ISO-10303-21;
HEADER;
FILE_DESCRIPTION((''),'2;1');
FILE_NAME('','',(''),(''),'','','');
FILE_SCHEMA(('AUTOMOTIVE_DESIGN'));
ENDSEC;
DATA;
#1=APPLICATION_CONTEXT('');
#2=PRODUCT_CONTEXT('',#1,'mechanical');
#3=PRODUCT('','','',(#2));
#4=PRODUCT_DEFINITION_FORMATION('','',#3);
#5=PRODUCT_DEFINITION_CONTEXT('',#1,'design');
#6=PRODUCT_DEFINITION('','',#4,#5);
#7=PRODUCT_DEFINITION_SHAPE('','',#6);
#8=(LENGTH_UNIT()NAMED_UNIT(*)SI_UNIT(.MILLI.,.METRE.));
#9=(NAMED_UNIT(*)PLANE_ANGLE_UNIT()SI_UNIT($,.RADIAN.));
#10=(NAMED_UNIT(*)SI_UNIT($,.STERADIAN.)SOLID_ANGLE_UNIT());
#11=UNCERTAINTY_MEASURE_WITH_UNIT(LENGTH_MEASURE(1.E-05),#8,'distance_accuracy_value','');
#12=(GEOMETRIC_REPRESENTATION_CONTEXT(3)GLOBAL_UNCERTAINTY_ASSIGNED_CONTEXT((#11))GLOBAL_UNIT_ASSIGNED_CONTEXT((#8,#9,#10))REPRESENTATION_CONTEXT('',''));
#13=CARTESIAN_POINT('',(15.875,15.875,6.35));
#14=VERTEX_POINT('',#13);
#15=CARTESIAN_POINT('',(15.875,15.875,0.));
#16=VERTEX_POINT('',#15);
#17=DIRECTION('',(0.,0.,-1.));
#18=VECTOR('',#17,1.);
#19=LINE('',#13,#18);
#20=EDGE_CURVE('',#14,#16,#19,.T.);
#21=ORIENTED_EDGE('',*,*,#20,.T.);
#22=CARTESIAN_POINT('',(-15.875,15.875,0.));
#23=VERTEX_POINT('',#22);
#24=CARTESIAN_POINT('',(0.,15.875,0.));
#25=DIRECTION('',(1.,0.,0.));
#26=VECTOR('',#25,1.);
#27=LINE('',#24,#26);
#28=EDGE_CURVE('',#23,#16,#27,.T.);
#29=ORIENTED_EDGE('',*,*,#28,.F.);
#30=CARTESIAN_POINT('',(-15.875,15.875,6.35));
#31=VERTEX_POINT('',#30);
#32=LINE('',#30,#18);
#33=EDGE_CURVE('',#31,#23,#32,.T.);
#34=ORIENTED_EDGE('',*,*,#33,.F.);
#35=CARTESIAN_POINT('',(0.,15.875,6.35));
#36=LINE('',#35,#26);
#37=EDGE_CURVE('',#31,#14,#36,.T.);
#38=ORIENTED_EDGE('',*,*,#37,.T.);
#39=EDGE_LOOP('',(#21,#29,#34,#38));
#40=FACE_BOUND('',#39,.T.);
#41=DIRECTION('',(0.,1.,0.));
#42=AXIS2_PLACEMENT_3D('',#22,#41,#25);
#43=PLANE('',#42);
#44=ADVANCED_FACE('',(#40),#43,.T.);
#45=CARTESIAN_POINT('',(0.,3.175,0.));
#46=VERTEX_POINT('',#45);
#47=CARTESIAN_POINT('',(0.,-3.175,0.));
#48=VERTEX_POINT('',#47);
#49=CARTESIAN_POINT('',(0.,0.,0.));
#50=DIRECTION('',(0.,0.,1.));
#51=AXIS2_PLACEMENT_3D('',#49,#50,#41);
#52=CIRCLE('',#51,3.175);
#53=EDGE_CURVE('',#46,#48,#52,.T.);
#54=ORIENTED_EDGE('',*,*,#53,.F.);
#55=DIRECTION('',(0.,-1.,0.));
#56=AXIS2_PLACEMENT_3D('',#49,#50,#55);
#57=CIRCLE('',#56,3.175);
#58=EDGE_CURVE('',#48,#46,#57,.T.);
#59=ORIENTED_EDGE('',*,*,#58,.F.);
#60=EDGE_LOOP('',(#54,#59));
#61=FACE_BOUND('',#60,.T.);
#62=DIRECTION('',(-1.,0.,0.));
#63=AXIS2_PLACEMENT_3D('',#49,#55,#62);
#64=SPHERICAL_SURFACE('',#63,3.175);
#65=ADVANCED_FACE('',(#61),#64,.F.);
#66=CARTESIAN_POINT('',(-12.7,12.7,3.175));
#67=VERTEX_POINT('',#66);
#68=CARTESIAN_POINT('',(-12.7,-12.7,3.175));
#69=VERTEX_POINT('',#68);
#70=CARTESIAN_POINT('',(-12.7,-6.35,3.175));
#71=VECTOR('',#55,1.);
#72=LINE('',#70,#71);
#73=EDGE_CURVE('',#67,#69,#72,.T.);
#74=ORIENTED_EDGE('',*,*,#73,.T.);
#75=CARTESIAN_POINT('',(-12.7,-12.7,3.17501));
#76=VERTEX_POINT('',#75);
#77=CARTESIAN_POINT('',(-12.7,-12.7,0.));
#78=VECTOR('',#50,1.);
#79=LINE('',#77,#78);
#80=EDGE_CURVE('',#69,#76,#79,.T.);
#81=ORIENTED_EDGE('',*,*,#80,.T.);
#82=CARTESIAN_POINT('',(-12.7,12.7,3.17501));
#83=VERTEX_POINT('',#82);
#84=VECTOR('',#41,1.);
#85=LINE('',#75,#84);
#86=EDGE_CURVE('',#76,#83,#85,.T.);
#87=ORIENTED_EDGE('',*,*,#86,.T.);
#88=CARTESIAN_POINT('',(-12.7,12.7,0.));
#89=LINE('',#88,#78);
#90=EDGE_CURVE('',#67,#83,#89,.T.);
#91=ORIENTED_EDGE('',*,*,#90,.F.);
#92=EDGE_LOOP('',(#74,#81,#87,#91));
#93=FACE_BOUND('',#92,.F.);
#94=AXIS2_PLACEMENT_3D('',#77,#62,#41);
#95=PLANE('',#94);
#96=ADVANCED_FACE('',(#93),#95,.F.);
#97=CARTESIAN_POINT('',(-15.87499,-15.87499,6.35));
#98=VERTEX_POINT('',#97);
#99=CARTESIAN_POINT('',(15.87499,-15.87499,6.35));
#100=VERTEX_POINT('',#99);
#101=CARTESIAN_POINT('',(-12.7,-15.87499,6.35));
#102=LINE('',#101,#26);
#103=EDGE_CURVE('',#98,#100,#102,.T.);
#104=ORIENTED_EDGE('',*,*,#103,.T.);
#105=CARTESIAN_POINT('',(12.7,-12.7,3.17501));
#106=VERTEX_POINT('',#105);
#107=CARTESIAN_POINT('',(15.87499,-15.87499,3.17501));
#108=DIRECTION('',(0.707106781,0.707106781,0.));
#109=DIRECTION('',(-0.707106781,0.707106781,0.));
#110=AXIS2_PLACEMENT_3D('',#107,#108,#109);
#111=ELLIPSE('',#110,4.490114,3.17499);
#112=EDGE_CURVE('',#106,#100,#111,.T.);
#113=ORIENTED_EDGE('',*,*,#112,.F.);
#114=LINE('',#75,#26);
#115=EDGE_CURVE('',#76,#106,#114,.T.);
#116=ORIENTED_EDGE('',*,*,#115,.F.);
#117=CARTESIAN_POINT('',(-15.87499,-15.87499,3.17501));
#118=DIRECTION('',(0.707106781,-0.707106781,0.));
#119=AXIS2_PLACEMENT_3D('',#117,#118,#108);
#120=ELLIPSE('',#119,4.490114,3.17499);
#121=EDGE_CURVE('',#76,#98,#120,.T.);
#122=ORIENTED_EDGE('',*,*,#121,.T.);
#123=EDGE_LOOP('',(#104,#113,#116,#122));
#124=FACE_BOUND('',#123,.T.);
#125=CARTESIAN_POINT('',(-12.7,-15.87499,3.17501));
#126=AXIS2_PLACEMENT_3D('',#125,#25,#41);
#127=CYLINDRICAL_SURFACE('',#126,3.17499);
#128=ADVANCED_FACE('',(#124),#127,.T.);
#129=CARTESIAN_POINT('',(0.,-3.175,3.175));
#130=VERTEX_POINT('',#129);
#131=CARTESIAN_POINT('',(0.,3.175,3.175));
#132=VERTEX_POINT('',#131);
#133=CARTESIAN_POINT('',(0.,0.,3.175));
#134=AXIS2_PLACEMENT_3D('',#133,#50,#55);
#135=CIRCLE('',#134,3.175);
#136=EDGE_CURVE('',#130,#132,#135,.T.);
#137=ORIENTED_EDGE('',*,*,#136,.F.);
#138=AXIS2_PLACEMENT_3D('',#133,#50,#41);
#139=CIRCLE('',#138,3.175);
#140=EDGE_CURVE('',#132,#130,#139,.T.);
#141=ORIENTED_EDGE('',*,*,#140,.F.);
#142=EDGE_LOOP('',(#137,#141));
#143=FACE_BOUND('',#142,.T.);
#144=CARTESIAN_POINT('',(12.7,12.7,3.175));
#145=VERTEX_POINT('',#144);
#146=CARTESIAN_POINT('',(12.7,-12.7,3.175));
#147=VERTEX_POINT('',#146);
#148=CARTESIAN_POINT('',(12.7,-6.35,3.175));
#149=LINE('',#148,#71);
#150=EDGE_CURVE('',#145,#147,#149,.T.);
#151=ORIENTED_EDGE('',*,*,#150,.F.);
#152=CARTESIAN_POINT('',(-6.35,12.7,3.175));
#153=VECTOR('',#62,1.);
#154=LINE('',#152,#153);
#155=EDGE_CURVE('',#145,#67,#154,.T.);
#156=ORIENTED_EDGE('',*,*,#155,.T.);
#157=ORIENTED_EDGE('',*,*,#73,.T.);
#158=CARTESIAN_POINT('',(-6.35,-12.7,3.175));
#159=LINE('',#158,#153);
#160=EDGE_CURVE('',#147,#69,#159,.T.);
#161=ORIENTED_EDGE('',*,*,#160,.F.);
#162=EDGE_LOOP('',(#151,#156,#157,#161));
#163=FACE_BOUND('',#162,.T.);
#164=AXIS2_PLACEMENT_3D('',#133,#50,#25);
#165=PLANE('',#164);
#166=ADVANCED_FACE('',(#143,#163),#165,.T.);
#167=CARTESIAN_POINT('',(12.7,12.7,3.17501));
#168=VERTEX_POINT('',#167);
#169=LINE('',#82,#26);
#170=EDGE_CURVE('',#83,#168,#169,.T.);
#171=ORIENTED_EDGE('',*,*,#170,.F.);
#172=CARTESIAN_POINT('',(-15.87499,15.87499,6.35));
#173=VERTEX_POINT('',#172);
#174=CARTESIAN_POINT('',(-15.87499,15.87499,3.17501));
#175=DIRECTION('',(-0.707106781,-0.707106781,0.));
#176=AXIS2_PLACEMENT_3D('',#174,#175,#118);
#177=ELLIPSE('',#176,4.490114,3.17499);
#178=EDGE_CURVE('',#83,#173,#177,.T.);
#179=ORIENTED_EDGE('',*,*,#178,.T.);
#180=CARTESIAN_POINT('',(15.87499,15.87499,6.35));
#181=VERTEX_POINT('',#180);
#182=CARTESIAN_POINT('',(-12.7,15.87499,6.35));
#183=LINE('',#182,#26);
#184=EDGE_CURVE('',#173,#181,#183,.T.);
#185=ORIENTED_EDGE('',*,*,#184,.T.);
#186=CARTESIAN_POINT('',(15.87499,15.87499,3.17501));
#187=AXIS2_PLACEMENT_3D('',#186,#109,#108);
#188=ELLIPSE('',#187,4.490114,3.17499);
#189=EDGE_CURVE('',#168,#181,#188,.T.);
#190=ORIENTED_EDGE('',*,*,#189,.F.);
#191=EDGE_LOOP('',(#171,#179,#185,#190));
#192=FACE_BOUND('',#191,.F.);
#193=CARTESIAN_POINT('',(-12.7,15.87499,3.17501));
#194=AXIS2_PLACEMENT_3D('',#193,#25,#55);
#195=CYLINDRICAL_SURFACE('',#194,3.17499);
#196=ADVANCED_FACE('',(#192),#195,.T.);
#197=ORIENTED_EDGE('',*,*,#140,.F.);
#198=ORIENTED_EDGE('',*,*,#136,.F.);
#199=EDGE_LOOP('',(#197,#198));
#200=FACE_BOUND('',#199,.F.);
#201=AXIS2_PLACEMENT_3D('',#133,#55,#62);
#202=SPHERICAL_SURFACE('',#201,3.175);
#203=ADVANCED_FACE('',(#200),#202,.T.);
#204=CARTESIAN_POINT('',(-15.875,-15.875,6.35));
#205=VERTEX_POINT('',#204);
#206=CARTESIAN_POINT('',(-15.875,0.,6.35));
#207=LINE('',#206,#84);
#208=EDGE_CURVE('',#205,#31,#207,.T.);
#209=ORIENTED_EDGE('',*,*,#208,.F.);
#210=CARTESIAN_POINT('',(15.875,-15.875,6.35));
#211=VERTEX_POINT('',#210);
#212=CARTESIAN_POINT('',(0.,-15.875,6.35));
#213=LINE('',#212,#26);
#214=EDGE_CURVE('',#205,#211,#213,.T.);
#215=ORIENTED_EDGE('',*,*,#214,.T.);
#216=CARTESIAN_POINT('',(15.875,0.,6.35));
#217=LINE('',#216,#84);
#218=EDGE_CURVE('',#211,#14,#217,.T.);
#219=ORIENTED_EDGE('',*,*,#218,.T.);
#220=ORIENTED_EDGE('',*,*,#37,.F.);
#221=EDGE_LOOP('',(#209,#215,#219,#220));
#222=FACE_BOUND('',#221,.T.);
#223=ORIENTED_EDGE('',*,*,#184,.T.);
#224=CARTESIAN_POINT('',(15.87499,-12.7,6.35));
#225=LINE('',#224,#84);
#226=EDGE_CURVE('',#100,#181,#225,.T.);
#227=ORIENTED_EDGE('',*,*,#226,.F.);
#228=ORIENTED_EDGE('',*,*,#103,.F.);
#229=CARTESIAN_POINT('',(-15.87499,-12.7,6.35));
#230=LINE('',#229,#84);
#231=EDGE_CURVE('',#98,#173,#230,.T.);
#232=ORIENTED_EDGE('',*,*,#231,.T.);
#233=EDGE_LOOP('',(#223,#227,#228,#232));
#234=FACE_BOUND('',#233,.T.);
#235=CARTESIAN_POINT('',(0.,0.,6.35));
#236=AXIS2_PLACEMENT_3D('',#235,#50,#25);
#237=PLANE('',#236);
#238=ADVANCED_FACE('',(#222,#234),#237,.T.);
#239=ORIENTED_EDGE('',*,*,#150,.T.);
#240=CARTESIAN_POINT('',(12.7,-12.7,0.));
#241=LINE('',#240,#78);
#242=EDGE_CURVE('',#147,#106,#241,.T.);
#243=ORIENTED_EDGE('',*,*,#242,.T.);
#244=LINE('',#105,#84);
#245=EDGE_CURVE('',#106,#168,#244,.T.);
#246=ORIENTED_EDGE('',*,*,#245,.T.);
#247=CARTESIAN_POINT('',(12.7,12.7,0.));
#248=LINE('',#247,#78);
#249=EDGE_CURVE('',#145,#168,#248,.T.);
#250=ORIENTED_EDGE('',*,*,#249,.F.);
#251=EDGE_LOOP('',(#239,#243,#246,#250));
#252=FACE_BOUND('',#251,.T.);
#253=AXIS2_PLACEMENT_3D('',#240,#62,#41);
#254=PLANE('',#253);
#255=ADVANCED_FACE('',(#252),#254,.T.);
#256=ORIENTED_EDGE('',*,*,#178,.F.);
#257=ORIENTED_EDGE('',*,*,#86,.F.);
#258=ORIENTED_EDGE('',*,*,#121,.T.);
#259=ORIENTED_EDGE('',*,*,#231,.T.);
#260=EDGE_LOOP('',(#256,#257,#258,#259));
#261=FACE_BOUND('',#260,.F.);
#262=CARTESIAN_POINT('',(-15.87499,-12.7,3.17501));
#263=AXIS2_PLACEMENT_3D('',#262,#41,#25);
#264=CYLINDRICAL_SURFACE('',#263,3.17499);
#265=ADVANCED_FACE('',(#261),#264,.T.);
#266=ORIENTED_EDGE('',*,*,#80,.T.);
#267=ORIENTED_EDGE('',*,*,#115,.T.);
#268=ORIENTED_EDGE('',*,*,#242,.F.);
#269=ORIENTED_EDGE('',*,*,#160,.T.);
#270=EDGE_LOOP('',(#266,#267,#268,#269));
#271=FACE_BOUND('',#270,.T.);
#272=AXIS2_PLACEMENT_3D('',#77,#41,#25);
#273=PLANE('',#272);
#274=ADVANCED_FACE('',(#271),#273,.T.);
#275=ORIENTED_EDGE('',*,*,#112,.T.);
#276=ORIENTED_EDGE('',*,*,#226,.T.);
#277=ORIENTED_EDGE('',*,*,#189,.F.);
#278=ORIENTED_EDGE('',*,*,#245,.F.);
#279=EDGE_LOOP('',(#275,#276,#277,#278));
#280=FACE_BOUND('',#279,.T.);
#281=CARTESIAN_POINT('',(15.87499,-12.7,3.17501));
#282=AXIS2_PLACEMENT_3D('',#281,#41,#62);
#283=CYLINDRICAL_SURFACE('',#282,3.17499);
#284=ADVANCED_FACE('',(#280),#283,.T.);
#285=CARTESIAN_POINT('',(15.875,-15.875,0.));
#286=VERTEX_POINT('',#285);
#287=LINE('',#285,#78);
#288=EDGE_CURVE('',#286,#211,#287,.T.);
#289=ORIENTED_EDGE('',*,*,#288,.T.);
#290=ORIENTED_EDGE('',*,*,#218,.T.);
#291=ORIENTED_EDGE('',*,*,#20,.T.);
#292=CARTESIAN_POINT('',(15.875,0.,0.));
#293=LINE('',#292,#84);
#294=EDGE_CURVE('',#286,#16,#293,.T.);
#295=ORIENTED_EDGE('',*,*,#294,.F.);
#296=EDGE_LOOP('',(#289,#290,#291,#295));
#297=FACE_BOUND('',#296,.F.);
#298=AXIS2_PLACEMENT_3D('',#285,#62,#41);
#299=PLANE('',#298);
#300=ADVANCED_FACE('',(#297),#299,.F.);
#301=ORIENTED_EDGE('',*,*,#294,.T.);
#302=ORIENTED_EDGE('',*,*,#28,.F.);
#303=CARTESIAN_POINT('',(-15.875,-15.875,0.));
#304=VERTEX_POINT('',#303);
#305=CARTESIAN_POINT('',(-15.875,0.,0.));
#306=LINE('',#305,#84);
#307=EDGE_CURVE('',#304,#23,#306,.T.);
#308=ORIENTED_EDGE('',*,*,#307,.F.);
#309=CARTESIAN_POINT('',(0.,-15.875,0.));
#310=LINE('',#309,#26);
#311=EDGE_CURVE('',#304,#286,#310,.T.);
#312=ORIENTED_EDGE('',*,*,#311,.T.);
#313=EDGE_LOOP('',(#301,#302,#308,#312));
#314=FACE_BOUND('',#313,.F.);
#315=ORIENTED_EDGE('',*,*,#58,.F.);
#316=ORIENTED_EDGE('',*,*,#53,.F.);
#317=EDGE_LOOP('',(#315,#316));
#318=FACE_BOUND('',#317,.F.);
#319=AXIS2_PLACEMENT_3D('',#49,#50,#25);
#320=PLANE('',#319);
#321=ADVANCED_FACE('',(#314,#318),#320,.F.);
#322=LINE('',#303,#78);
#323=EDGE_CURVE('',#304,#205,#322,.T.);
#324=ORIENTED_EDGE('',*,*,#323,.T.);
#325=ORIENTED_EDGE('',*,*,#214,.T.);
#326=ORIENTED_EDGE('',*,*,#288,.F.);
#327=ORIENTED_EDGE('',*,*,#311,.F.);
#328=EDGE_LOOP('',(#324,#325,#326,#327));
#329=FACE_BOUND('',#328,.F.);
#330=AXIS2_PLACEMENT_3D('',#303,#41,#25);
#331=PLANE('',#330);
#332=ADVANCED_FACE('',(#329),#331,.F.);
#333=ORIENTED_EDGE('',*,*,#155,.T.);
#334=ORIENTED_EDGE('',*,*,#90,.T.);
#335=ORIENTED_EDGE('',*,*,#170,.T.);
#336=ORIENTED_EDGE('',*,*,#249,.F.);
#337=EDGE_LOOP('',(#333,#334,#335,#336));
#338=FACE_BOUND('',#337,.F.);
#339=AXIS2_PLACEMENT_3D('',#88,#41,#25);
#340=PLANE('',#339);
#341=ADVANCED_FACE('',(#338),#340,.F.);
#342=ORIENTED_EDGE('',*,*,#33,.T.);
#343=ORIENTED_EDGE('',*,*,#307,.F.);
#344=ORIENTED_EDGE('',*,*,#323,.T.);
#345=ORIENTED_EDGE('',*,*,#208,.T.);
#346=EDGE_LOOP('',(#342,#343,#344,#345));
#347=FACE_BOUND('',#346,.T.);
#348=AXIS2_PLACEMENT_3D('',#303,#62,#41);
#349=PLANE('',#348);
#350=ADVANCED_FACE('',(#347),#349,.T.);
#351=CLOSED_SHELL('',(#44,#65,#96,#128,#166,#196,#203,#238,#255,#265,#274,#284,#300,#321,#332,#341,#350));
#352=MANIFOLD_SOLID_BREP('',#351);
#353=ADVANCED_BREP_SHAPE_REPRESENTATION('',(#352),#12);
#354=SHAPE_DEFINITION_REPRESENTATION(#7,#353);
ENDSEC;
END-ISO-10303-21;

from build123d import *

# Parameters (mm, degrees)
F0_W     = 31.75
F0_H     = 31.75
F0_W_2   = 25.4
F0_H_2   = 25.4
F1_DEPTH = 3.175
F2_DEPTH = 6.35
F6_R     = 3.17499


# Not quite as in the source:
# - a fillet or chamfer is up to 0.001 mm smaller than in the source, because OpenCascade refuses the exact size


with BuildPart() as f1:
    # F0 (on Top) → F1 (new body)
    with BuildSketch(Plane.XY):
        Rectangle(F0_W, F0_H)
        Rectangle(F0_W_2, F0_H_2, mode=Mode.SUBTRACT)
        Rectangle(F0_W_2, F0_H_2)
        with BuildLine():
            ThreePointArc((0, 3.175), (2.2450640303, 2.2450640303), (3.175, 0))
            ThreePointArc((3.175, 0), (2.2450640303, -2.2450640303), (0, -3.175))
            ThreePointArc((0, -3.175), (-3.175, 0), (0, 3.175))
        make_face(mode=Mode.SUBTRACT)
        with BuildLine():
            ThreePointArc((0, -3.175), (2.2450640303, -2.2450640303), (3.175, 0))
            ThreePointArc((3.175, 0), (2.2450640303, 2.2450640303), (0, 3.175))
            Line((0, 3.175), (0, -3.175))
        make_face()
        with BuildLine():
            Line((0, -3.175), (0, 3.175))
            ThreePointArc((0, 3.175), (-3.175, 0), (0, -3.175))
        make_face()
    extrude(amount=F1_DEPTH)

    # F0 (on Top) → F2 (join)
    with BuildSketch(Plane.XY):
        Rectangle(F0_W, F0_H)
        Rectangle(F0_W_2, F0_H_2, mode=Mode.SUBTRACT)
    extrude(amount=F2_DEPTH)

    # F3 (on face) → F4 (revolve)
    with BuildSketch(Plane.XY.offset(3.175)):
        with BuildLine():
            Line((0, -3.175), (0, 3.175))
            ThreePointArc((0, 3.175), (-3.175, 0), (0, -3.175))
        make_face()
    revolve(axis=Axis((0, 0, 3.175), (0, 1, 0)))

    # F0 (on Top) → F5 (revolve, cut)
    with BuildSketch(Plane.XY):
        with BuildLine():
            Line((0, -3.175), (0, 3.175))
            ThreePointArc((0, 3.175), (-3.175, 0), (0, -3.175))
        make_face()
    revolve(axis=Axis((0, 0, 0), (0, 1, 0)), mode=Mode.SUBTRACT)

    # F6 (radius 3.175 in the source; OpenCascade refuses exactly that, so slightly less here)
    f6_edges = [f1.edges().sort_by_distance(p)[0] for p in [
        (0, 12.7, 6.35),
        (12.7, 0, 6.35),
        (-12.7, 0, 6.35),
        (0, -12.7, 6.35),
    ]]
    fillet(f6_edges, radius=F6_R)


solid = f1.part
